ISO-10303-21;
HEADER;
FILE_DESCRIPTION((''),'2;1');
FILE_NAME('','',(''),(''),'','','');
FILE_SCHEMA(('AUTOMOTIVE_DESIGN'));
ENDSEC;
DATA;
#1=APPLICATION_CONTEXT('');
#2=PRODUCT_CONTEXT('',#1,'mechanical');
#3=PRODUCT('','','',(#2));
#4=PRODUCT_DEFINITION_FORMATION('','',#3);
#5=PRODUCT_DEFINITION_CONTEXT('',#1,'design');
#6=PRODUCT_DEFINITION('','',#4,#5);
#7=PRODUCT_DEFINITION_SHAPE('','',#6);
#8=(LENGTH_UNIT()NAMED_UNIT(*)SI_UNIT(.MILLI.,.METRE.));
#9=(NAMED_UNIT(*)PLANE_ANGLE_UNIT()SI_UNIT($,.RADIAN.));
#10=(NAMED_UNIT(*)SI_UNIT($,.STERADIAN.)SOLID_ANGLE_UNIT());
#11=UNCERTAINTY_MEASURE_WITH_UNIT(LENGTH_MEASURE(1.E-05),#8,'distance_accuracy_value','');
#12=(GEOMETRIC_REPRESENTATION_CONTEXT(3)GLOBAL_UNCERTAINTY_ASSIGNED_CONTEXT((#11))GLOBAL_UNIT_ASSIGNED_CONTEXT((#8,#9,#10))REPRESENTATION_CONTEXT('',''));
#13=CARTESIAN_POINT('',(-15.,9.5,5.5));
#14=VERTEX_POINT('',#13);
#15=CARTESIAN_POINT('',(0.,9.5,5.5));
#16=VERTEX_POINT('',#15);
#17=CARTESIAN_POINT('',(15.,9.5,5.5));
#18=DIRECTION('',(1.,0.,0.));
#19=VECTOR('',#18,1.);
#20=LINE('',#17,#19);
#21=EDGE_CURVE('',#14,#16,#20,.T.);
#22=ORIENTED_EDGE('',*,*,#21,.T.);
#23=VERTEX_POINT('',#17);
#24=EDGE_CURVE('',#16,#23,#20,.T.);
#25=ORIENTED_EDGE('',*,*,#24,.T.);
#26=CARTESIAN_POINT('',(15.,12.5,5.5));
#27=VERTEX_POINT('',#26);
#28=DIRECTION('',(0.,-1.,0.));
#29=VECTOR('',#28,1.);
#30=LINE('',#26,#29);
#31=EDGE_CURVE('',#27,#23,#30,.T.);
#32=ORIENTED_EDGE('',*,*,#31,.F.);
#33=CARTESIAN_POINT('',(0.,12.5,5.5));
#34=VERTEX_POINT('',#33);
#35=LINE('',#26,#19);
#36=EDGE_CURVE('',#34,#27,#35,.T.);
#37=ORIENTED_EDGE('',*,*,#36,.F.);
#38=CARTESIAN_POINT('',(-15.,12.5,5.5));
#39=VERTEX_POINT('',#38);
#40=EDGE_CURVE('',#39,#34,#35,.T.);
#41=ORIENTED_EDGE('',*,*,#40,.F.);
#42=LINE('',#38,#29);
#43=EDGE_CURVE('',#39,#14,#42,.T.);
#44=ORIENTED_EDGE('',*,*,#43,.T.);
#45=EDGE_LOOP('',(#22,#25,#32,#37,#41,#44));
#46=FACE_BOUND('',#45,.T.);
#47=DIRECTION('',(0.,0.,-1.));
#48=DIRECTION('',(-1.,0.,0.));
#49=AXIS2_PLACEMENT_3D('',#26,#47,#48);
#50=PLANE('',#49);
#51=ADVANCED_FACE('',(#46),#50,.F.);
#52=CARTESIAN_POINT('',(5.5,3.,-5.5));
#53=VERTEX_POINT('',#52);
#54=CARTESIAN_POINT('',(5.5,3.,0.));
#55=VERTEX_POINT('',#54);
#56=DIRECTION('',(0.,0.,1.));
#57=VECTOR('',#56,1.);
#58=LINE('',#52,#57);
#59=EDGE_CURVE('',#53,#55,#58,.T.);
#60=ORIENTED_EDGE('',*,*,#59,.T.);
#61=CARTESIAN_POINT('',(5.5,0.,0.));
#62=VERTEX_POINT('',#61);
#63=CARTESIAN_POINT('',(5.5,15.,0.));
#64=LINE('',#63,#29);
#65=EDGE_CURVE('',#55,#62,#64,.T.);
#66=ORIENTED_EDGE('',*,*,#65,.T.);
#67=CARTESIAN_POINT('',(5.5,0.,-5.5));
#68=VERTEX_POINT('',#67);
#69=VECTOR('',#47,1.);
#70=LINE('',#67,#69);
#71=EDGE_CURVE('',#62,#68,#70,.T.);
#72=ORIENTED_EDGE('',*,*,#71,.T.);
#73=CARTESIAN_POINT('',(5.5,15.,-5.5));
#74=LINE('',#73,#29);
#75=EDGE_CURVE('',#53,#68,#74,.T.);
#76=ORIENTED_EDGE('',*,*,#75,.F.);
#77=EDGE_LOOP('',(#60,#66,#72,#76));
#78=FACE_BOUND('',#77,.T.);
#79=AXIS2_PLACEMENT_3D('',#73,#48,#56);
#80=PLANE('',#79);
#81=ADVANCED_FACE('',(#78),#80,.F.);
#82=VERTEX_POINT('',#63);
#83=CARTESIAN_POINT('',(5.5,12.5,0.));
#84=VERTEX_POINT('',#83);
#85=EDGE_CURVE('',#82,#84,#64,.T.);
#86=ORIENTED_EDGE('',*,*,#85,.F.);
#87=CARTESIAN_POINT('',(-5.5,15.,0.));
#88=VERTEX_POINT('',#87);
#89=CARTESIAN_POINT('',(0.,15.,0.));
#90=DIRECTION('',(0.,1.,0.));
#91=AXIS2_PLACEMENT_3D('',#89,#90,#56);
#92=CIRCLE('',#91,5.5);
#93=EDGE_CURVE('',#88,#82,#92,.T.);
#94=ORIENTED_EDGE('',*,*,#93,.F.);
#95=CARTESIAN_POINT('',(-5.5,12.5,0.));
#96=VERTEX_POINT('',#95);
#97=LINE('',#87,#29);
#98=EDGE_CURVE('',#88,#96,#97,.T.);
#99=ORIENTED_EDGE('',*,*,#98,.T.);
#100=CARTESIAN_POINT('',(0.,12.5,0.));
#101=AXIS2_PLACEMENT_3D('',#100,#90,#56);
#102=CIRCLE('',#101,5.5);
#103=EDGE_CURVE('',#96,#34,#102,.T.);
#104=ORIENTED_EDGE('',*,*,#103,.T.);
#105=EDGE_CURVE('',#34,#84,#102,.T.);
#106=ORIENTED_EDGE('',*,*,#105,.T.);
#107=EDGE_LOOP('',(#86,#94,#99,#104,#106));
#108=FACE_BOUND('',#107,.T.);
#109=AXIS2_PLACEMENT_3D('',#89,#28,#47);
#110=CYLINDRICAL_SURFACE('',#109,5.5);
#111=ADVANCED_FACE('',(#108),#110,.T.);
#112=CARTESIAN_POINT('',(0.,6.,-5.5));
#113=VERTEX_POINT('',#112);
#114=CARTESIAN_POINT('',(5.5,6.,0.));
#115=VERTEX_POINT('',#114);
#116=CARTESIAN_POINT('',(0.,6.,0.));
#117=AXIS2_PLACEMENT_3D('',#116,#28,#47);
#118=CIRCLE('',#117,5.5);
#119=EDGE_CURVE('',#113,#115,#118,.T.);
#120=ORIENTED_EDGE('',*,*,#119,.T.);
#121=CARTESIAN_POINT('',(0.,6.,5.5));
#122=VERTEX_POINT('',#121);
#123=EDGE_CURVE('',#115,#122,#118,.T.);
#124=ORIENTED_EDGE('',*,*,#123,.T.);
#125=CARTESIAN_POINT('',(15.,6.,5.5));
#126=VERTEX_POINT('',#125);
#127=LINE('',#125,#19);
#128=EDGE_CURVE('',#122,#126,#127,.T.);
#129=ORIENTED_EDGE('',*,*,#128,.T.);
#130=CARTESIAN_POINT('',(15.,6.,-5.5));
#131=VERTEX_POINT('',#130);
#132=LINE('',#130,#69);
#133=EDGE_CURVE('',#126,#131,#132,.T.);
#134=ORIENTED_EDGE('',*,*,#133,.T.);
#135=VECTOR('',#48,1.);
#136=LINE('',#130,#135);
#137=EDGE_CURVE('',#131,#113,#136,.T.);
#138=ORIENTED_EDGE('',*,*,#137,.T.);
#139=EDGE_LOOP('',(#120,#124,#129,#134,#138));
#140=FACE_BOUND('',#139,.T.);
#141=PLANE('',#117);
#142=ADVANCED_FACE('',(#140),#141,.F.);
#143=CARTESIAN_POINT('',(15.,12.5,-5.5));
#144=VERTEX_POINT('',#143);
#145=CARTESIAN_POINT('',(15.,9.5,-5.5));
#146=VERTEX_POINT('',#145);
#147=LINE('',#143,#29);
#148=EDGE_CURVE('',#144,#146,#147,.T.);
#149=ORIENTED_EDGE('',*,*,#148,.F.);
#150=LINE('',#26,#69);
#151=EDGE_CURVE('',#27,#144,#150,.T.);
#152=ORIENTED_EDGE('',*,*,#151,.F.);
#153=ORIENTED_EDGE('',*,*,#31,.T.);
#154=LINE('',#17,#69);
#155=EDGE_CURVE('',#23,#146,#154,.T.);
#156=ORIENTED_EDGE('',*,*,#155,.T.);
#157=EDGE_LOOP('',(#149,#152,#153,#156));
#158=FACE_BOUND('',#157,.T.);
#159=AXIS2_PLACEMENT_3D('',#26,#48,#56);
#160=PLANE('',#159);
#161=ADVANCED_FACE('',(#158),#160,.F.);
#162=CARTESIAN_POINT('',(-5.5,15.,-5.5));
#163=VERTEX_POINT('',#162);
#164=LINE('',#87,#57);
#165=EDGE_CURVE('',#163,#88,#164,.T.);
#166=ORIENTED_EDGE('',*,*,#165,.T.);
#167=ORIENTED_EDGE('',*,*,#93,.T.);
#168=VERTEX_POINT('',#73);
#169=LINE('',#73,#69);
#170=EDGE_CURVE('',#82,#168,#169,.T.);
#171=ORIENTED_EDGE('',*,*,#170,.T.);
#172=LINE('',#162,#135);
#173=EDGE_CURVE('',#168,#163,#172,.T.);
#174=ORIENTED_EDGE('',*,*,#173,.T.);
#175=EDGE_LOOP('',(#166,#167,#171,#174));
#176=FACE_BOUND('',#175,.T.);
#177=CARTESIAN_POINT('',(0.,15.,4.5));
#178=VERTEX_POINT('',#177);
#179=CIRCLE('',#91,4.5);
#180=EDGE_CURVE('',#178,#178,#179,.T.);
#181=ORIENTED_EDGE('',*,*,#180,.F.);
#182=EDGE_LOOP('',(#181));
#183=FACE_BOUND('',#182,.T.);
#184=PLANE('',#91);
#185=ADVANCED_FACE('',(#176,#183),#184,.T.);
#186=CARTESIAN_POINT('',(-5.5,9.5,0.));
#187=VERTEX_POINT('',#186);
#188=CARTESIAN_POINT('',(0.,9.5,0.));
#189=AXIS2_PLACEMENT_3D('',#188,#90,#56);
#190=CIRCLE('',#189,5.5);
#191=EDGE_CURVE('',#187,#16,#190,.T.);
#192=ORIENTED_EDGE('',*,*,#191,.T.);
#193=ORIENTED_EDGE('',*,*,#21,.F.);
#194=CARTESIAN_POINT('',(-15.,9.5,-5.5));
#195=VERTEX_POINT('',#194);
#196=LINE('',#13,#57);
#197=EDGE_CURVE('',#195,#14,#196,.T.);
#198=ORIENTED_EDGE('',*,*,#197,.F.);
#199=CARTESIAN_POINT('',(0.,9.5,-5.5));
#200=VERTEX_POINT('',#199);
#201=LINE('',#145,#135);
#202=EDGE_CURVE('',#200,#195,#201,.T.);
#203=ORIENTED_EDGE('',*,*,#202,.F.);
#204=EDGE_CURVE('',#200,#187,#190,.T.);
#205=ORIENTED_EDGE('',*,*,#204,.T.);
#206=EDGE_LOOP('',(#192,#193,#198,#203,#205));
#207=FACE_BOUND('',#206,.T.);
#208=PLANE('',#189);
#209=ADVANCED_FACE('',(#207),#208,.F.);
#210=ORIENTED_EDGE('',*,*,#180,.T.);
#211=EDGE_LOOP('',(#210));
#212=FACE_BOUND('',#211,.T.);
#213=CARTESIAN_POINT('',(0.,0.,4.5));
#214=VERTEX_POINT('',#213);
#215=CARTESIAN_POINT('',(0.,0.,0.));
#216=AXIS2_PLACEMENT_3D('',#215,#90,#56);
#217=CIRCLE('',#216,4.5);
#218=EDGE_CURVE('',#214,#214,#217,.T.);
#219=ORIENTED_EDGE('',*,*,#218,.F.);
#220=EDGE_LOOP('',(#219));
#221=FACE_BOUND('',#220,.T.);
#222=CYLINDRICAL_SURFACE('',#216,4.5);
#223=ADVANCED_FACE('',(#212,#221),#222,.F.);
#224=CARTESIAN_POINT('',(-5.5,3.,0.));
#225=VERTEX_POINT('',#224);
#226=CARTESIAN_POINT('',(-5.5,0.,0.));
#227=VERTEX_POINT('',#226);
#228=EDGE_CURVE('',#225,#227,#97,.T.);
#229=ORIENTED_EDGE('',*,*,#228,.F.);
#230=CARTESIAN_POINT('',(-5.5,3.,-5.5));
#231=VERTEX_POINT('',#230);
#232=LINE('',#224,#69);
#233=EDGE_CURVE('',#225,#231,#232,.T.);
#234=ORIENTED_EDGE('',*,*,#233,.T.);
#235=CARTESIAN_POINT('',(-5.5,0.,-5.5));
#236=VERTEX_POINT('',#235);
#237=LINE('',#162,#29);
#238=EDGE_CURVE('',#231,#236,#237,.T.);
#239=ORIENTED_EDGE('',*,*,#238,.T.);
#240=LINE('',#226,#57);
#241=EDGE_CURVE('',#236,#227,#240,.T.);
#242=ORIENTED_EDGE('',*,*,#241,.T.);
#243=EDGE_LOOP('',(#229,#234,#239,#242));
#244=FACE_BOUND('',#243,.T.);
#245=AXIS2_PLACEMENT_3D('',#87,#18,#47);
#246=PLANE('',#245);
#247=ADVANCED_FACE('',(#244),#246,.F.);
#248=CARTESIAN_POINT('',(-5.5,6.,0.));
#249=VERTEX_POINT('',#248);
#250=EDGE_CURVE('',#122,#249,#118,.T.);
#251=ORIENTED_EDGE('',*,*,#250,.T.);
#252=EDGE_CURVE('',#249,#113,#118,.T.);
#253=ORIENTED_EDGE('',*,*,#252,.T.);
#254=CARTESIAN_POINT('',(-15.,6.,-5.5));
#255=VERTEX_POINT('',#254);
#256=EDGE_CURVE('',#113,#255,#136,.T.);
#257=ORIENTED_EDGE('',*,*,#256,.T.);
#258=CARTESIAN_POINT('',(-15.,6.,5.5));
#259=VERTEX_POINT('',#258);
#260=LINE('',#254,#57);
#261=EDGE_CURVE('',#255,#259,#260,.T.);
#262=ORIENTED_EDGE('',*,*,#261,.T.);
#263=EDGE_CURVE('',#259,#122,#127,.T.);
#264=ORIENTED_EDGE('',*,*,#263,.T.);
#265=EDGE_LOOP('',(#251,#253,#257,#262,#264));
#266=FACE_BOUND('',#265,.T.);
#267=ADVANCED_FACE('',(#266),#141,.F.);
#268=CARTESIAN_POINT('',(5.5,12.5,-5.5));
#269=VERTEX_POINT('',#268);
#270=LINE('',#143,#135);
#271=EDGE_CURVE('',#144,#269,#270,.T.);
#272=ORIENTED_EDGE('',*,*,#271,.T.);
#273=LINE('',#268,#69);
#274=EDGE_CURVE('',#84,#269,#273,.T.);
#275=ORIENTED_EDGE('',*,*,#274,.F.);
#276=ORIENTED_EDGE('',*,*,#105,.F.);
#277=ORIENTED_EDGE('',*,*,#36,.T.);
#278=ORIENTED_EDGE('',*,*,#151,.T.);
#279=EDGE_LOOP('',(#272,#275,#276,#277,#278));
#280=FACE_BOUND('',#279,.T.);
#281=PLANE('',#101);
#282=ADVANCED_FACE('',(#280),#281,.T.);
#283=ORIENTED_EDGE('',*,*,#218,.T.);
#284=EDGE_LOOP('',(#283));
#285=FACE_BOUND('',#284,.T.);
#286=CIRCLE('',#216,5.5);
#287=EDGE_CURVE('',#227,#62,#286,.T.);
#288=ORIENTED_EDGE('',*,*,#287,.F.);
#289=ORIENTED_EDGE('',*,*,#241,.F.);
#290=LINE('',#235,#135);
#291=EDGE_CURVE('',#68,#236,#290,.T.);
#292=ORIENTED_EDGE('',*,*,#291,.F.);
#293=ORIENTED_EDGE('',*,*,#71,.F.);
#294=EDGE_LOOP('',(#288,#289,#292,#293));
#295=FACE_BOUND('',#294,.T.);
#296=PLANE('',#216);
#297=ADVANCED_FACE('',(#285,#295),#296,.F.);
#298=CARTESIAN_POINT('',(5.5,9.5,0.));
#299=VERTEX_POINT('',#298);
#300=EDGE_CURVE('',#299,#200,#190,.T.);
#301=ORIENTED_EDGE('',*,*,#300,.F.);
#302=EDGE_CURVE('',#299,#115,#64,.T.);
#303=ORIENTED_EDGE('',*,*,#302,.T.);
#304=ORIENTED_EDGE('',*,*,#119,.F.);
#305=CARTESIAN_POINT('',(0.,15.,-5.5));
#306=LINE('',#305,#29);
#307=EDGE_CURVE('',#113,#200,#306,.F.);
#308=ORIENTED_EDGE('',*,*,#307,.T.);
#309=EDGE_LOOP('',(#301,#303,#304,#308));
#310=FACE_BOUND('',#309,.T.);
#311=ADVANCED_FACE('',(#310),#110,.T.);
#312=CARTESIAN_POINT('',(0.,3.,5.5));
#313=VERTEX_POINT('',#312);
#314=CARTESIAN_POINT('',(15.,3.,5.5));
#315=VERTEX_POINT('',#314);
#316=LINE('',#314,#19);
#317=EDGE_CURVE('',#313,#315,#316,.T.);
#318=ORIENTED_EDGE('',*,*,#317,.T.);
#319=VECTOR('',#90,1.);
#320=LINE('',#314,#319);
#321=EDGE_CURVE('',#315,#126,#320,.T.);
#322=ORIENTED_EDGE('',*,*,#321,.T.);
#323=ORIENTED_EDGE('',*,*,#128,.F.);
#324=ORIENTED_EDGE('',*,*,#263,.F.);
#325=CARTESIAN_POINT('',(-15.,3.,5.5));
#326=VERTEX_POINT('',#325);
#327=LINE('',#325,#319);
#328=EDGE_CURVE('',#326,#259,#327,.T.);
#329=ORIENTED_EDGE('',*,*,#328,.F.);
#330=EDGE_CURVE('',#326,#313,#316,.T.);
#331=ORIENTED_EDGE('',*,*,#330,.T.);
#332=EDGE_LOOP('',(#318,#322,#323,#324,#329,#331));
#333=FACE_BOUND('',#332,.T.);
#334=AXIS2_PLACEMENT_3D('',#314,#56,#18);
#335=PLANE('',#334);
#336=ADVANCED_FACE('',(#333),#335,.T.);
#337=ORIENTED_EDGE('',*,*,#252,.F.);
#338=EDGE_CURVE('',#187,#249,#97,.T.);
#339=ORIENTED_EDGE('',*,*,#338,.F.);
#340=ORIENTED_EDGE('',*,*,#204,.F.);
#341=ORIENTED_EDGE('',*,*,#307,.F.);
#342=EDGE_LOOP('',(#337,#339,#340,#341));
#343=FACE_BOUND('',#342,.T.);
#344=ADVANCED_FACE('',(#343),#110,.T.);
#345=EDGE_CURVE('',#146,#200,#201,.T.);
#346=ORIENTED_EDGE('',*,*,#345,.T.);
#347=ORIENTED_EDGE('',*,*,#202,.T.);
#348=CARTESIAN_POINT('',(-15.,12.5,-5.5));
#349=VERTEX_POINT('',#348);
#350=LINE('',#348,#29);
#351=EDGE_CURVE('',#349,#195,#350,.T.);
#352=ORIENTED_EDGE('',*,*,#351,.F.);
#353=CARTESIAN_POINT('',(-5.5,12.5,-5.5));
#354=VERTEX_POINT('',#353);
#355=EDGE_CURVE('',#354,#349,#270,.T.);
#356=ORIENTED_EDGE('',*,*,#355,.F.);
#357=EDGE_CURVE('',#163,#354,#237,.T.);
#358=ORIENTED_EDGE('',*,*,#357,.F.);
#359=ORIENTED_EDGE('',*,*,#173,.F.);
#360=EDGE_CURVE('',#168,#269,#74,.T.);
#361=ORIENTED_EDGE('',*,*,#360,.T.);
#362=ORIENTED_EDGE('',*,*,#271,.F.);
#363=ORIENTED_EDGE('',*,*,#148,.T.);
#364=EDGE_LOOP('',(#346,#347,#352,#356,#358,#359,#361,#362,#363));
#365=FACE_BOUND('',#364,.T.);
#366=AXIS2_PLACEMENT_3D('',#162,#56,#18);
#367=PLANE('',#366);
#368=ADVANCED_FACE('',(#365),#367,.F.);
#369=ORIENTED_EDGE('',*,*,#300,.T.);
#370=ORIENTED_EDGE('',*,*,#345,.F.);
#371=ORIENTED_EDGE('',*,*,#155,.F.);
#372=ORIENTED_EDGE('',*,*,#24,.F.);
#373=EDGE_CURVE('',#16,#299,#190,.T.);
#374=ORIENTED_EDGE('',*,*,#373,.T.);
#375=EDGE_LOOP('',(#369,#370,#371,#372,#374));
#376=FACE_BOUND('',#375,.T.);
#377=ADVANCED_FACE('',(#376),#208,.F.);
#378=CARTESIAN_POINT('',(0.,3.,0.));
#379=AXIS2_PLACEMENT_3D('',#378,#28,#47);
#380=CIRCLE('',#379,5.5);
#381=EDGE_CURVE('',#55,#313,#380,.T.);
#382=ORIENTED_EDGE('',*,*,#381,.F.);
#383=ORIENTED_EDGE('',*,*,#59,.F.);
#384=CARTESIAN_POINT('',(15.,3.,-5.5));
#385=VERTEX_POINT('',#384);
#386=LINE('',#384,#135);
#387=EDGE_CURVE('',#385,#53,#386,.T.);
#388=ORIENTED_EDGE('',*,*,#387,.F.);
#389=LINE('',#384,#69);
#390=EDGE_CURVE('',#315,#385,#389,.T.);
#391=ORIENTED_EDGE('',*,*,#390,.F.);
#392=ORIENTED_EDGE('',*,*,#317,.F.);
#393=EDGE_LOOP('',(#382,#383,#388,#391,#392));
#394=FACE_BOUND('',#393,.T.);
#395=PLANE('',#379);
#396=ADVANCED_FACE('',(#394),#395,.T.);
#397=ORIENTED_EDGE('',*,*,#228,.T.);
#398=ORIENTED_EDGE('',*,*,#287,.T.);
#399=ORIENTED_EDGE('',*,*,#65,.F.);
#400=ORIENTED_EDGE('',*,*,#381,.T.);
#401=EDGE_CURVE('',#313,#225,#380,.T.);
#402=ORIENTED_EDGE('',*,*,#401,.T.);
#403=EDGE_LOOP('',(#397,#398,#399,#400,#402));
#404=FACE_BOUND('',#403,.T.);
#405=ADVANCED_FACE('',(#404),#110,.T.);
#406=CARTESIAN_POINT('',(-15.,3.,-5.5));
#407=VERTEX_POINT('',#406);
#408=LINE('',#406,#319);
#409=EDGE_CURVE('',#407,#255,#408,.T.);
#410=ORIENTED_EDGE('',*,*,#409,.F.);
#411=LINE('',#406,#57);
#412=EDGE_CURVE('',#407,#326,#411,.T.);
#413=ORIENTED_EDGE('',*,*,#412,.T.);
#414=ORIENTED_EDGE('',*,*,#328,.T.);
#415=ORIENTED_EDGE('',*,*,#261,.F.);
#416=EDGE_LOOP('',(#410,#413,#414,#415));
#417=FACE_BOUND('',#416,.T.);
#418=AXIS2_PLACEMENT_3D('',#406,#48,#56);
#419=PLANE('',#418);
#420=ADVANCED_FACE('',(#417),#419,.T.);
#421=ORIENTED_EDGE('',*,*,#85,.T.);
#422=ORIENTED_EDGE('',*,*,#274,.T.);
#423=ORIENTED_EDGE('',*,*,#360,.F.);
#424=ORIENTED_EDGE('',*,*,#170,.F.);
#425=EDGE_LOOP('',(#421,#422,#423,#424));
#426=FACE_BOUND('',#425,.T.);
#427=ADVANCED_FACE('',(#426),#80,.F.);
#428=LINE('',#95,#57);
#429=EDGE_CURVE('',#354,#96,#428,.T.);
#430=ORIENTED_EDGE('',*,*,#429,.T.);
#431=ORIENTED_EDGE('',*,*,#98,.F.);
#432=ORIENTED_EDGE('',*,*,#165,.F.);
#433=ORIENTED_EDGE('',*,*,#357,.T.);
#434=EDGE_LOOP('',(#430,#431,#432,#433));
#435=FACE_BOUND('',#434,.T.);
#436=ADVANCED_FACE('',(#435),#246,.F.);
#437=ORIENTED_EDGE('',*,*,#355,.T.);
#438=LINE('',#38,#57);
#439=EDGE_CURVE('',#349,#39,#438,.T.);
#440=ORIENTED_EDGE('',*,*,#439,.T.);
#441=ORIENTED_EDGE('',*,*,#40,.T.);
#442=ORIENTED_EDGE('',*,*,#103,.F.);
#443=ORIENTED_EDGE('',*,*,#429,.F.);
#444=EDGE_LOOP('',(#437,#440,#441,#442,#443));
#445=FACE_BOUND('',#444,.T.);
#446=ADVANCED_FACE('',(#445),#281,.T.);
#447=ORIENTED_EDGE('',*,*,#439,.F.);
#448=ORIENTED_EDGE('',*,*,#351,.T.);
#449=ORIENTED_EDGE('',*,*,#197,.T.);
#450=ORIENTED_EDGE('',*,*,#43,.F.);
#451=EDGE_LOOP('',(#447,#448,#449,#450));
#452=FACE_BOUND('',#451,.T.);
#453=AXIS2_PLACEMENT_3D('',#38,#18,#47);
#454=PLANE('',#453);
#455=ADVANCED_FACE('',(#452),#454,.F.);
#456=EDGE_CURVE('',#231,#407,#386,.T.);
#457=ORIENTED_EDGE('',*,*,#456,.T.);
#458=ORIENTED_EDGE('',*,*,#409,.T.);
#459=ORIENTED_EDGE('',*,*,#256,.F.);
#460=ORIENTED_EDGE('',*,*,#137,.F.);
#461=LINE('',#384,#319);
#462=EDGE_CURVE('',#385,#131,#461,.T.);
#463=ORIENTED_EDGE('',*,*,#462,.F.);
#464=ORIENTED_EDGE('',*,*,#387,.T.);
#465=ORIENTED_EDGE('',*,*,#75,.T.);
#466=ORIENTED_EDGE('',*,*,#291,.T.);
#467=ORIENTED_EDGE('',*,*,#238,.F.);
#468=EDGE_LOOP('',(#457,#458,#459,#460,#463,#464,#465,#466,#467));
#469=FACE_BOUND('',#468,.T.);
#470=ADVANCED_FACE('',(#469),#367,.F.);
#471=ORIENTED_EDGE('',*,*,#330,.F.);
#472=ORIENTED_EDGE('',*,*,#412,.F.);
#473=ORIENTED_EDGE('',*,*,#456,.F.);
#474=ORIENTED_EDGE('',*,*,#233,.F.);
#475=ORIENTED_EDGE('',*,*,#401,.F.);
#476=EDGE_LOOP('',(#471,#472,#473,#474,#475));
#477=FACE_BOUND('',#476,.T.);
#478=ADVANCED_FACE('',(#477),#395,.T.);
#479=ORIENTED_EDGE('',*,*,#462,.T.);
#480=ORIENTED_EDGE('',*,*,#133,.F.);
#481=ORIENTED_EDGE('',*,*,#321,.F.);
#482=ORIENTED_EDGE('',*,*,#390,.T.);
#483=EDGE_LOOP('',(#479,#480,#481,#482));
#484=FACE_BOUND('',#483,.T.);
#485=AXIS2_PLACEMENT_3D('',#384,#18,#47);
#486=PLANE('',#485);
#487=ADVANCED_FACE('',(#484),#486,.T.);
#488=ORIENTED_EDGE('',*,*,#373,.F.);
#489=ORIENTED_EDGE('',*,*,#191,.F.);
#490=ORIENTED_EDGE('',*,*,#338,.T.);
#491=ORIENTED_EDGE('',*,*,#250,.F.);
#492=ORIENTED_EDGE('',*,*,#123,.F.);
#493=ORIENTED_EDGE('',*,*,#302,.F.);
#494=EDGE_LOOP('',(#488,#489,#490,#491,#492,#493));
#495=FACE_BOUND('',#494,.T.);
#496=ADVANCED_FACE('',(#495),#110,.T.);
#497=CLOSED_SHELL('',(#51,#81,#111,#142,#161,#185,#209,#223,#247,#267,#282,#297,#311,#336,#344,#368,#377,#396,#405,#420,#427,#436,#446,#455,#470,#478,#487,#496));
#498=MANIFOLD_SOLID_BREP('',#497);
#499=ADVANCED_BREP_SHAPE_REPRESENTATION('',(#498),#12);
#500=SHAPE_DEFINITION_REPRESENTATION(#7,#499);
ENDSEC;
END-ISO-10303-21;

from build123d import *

# Parameters (mm, degrees)
SALIENTE_EXTRUIR1_DEPTH = 15
SALIENTE_EXTRUIR2_START = -9
CROQUIS2_W              = 30
CROQUIS2_H              = 11
SALIENTE_EXTRUIR2_DEPTH = 3
SALIENTE_EXTRUIR3_START = 3.5
CROQUIS3_W              = 30
CROQUIS3_H              = 11
SALIENTE_EXTRUIR3_DEPTH = 3
CROQUIS4_R              = 4.5
CORTAR_EXTRUIR1_DEPTH   = 22.914607001
REDONDEO6_R             = 5.5
REDONDEO7_R             = 5.5


with BuildPart() as part:
    # Croquis1 → Saliente-Extruir1 (new body)
    with BuildSketch(Plane(origin=(0, 0, 0), x_dir=(1, 0, 0), z_dir=(0, 1, 0))):
        with BuildLine():
            Line((-5.5, 0), (-5.5, 5.5))
            Line((-5.5, 5.5), (5.5, 5.5))
            Line((5.5, 5.5), (5.5, 0))
            ThreePointArc((5.5, 0), (0, -5.5), (-5.5, 0))
        make_face()
    extrude(amount=SALIENTE_EXTRUIR1_DEPTH)

    # Croquis2 → Saliente-Extruir2 (add)
    with BuildSketch(Plane(origin=(0, 15, 0), x_dir=(1, 0, 0), z_dir=(0, 1, 0)).offset(SALIENTE_EXTRUIR2_START)):
        Rectangle(CROQUIS2_W, CROQUIS2_H)
    extrude(amount=-SALIENTE_EXTRUIR2_DEPTH)

    # Croquis3 → Saliente-Extruir3 (add)
    with BuildSketch(Plane(origin=(0, 6, 0), x_dir=(1, 0, 0), z_dir=(0, 1, 0)).offset(SALIENTE_EXTRUIR3_START)):
        Rectangle(CROQUIS3_W, CROQUIS3_H)
    extrude(amount=SALIENTE_EXTRUIR3_DEPTH)

    # Croquis4 → Cortar-Extruir1 (cut, through all)
    with BuildSketch(Plane(origin=(0, 15, 0), x_dir=(1, 0, 0), z_dir=(0, 1, 0))):
        with Locations(Location((0, 0, 0), (0, 0, 270))):
            Circle(CROQUIS4_R)
    extrude(amount=-CORTAR_EXTRUIR1_DEPTH, mode=Mode.SUBTRACT)

    # Redondeo6
    redondeo6_edges = [part.edges().sort_by_distance(p)[0] for p in [
        (-5.5, 7.75, -5.5),
    ]]
    fillet(redondeo6_edges, radius=REDONDEO6_R - 0.0001)  # a hair under: the kernel refuses the full size

    # Redondeo7
    redondeo7_edges = [part.edges().sort_by_distance(p)[0] for p in [
        (5.5, 7.75, -5.5),
    ]]
    fillet(redondeo7_edges, radius=REDONDEO7_R - 0.0001)  # a hair under: the kernel refuses the full size


solid = part.part
